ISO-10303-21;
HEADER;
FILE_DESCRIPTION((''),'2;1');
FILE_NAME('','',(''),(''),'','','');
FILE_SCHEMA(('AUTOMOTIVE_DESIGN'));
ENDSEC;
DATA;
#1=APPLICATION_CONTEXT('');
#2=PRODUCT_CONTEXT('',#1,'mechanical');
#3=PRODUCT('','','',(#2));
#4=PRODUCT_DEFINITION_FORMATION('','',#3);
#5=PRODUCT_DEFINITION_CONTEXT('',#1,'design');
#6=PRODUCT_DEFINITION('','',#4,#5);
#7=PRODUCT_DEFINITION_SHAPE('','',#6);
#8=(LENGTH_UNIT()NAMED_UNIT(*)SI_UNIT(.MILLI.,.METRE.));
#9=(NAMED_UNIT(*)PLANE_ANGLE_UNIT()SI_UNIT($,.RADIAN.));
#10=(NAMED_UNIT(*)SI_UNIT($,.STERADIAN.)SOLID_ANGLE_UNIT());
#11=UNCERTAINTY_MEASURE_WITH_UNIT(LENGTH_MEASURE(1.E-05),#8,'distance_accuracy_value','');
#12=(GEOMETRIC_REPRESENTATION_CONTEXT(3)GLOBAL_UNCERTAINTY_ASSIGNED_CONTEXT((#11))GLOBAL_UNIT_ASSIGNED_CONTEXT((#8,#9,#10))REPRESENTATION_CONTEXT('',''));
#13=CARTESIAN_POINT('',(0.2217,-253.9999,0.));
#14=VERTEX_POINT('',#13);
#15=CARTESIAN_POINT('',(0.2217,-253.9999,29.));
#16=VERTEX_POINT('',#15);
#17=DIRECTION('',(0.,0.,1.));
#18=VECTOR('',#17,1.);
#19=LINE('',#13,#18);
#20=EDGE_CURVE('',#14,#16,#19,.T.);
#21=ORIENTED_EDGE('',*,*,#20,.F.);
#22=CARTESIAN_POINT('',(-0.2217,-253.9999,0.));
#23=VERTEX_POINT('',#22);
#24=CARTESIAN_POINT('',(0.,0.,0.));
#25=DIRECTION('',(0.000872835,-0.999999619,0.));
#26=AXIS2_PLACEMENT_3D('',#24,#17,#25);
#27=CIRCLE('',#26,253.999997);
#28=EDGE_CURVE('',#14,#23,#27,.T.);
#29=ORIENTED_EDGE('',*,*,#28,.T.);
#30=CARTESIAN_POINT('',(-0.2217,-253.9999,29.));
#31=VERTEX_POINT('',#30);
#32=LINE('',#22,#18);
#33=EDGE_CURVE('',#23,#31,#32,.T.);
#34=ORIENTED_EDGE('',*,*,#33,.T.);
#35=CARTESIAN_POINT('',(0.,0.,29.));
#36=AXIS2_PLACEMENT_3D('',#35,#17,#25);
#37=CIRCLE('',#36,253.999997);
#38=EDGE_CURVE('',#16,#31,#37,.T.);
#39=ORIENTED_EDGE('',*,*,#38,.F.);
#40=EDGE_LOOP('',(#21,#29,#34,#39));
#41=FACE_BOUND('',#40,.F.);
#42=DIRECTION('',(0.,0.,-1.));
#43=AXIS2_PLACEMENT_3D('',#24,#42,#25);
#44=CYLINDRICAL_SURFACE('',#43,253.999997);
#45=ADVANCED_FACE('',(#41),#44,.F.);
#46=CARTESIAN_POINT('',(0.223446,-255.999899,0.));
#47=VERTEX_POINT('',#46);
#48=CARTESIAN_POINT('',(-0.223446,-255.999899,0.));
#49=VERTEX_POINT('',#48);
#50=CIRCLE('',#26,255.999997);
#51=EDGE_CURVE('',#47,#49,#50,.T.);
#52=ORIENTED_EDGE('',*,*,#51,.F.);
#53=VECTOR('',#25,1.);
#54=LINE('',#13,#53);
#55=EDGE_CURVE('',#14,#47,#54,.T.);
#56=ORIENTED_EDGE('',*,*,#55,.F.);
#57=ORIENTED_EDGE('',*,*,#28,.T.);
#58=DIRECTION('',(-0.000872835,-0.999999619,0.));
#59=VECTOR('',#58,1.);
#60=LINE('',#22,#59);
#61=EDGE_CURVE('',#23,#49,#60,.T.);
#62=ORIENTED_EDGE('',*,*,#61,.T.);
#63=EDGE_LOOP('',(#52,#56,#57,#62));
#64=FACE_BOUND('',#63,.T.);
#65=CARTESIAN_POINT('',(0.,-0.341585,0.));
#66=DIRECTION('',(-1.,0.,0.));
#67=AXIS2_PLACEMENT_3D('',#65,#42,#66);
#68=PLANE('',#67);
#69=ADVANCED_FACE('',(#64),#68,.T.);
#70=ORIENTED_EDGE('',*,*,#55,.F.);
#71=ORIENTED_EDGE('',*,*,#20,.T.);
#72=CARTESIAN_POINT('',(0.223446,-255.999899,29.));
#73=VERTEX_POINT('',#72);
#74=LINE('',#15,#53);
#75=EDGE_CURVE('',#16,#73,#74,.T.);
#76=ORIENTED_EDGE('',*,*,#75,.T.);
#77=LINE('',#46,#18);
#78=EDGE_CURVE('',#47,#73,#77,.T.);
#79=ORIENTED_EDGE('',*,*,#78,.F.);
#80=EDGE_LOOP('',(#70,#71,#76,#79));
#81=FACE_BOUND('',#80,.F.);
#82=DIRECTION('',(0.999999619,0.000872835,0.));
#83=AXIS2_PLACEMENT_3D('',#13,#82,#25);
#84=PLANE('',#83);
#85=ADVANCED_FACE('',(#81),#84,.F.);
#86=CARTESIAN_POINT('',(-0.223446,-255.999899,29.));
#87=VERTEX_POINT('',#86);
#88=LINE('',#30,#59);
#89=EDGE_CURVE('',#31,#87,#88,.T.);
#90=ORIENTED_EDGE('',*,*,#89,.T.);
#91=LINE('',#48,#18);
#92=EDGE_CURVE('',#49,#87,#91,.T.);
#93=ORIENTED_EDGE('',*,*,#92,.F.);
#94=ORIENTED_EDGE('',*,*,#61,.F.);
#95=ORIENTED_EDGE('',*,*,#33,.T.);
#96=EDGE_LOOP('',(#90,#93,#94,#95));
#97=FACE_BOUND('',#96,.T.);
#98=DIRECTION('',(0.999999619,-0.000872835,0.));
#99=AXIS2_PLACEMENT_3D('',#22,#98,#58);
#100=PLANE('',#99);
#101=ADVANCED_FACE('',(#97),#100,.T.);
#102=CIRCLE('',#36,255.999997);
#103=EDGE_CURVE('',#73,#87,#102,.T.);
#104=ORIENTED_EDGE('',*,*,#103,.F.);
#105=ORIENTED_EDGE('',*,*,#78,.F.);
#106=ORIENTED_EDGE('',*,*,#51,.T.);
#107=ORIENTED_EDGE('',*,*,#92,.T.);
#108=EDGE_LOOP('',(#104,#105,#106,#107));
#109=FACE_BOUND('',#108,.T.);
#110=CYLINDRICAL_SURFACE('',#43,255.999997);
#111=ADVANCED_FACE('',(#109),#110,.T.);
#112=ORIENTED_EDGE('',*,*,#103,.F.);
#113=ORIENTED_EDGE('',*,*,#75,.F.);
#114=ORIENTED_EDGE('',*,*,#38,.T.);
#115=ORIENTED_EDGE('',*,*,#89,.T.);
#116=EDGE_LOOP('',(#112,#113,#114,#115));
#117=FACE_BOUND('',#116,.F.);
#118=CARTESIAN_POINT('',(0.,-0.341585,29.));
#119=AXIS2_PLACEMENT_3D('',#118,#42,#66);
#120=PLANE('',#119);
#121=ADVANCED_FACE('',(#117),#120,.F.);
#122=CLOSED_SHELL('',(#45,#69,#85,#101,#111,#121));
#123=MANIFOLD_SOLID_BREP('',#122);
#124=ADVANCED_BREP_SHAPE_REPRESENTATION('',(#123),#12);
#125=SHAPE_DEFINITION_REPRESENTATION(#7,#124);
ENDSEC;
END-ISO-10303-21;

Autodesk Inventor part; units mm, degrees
ref_plane "YZ Plane" through (0, 0, 0) normal (1, 0, 0) x (0, 1, 0)
ref_plane "XZ Plane" through (0, 0, 0) normal (0, 1, 0) x (-1, 0, 0)
ref_plane "XY Plane" through (0, 0, 0) normal (0, 0, 1) x (1, 0, 0)
sketch "Sketch1" plane through (0, 0, 0) normal (0, 0, 1) x (1, 0, 0)
  arc A0 (0.2217, -253.9999) -> (-0.2217, -253.9999) centre (0, 0) ccw
  line L0 (0, 0) -> (-0.2217, -253.9999) construction
  line L1 (0, 0) -> (0, 241.44) construction
  line L2 (0, 0) -> (0.2217, -253.9999) construction
  arc A1 (-0.2217, -253.9999) -> (0.2217, -253.9999) centre (0, 0) ccw construction
  point P0 (-207.8461, 120)
  point P1 (207.8461, 120)
  dimension "d28" = 508
  dimension "d30" = 359.9
contour flange "Contour Flange1" sketch "Sketch1" thickness 2 bend radius 2 width 29 along (0, 0, 1) mid plane no both sides no wall seen from (0, 254, 0) lies toward (0, 1, 0) curves A0
bend "Bend1"
corner "Corner1"
equation "\"d28\" = Колесо_диам3_борт_ступицы"
equation "\"d31\" = Thickness"
equation "\"d32\" = BendReliefWidth"
equation "\"d33\" = BendReliefDepth"
equation "\"d34\" = MinimumRemnant"
equation "\"d35\" = TransitionRadius"
equation "\"d37\" = BendRadius"
equation "\"d39\" = CornerReliefSize"
equation "\"d40\" = GapSize"
equation "\"d41\" = JacobiRadiusSize"
equation "\"BendRadius\" = Thickness"
equation "\"BendReliefWidth\" = Thickness"
equation "\"BendReliefDepth\" = 0.5 * Thickness"
equation "\"CornerReliefSize\" = 4 * Thickness"
equation "\"MinimumRemnant\" = 2 * Thickness"
equation "\"TransitionRadius\" = BendRadius"
equation "\"JacobiRadiusSize\" = BendRadius"
equation "\"GapSize\" = Thickness"
equation "\"Колесо_диам3_борт_ступицы\" = 508"
equation "\"Thickness\" = 2"
properties part number "DMF2.0 01 46 Gear axis wheel 6"
